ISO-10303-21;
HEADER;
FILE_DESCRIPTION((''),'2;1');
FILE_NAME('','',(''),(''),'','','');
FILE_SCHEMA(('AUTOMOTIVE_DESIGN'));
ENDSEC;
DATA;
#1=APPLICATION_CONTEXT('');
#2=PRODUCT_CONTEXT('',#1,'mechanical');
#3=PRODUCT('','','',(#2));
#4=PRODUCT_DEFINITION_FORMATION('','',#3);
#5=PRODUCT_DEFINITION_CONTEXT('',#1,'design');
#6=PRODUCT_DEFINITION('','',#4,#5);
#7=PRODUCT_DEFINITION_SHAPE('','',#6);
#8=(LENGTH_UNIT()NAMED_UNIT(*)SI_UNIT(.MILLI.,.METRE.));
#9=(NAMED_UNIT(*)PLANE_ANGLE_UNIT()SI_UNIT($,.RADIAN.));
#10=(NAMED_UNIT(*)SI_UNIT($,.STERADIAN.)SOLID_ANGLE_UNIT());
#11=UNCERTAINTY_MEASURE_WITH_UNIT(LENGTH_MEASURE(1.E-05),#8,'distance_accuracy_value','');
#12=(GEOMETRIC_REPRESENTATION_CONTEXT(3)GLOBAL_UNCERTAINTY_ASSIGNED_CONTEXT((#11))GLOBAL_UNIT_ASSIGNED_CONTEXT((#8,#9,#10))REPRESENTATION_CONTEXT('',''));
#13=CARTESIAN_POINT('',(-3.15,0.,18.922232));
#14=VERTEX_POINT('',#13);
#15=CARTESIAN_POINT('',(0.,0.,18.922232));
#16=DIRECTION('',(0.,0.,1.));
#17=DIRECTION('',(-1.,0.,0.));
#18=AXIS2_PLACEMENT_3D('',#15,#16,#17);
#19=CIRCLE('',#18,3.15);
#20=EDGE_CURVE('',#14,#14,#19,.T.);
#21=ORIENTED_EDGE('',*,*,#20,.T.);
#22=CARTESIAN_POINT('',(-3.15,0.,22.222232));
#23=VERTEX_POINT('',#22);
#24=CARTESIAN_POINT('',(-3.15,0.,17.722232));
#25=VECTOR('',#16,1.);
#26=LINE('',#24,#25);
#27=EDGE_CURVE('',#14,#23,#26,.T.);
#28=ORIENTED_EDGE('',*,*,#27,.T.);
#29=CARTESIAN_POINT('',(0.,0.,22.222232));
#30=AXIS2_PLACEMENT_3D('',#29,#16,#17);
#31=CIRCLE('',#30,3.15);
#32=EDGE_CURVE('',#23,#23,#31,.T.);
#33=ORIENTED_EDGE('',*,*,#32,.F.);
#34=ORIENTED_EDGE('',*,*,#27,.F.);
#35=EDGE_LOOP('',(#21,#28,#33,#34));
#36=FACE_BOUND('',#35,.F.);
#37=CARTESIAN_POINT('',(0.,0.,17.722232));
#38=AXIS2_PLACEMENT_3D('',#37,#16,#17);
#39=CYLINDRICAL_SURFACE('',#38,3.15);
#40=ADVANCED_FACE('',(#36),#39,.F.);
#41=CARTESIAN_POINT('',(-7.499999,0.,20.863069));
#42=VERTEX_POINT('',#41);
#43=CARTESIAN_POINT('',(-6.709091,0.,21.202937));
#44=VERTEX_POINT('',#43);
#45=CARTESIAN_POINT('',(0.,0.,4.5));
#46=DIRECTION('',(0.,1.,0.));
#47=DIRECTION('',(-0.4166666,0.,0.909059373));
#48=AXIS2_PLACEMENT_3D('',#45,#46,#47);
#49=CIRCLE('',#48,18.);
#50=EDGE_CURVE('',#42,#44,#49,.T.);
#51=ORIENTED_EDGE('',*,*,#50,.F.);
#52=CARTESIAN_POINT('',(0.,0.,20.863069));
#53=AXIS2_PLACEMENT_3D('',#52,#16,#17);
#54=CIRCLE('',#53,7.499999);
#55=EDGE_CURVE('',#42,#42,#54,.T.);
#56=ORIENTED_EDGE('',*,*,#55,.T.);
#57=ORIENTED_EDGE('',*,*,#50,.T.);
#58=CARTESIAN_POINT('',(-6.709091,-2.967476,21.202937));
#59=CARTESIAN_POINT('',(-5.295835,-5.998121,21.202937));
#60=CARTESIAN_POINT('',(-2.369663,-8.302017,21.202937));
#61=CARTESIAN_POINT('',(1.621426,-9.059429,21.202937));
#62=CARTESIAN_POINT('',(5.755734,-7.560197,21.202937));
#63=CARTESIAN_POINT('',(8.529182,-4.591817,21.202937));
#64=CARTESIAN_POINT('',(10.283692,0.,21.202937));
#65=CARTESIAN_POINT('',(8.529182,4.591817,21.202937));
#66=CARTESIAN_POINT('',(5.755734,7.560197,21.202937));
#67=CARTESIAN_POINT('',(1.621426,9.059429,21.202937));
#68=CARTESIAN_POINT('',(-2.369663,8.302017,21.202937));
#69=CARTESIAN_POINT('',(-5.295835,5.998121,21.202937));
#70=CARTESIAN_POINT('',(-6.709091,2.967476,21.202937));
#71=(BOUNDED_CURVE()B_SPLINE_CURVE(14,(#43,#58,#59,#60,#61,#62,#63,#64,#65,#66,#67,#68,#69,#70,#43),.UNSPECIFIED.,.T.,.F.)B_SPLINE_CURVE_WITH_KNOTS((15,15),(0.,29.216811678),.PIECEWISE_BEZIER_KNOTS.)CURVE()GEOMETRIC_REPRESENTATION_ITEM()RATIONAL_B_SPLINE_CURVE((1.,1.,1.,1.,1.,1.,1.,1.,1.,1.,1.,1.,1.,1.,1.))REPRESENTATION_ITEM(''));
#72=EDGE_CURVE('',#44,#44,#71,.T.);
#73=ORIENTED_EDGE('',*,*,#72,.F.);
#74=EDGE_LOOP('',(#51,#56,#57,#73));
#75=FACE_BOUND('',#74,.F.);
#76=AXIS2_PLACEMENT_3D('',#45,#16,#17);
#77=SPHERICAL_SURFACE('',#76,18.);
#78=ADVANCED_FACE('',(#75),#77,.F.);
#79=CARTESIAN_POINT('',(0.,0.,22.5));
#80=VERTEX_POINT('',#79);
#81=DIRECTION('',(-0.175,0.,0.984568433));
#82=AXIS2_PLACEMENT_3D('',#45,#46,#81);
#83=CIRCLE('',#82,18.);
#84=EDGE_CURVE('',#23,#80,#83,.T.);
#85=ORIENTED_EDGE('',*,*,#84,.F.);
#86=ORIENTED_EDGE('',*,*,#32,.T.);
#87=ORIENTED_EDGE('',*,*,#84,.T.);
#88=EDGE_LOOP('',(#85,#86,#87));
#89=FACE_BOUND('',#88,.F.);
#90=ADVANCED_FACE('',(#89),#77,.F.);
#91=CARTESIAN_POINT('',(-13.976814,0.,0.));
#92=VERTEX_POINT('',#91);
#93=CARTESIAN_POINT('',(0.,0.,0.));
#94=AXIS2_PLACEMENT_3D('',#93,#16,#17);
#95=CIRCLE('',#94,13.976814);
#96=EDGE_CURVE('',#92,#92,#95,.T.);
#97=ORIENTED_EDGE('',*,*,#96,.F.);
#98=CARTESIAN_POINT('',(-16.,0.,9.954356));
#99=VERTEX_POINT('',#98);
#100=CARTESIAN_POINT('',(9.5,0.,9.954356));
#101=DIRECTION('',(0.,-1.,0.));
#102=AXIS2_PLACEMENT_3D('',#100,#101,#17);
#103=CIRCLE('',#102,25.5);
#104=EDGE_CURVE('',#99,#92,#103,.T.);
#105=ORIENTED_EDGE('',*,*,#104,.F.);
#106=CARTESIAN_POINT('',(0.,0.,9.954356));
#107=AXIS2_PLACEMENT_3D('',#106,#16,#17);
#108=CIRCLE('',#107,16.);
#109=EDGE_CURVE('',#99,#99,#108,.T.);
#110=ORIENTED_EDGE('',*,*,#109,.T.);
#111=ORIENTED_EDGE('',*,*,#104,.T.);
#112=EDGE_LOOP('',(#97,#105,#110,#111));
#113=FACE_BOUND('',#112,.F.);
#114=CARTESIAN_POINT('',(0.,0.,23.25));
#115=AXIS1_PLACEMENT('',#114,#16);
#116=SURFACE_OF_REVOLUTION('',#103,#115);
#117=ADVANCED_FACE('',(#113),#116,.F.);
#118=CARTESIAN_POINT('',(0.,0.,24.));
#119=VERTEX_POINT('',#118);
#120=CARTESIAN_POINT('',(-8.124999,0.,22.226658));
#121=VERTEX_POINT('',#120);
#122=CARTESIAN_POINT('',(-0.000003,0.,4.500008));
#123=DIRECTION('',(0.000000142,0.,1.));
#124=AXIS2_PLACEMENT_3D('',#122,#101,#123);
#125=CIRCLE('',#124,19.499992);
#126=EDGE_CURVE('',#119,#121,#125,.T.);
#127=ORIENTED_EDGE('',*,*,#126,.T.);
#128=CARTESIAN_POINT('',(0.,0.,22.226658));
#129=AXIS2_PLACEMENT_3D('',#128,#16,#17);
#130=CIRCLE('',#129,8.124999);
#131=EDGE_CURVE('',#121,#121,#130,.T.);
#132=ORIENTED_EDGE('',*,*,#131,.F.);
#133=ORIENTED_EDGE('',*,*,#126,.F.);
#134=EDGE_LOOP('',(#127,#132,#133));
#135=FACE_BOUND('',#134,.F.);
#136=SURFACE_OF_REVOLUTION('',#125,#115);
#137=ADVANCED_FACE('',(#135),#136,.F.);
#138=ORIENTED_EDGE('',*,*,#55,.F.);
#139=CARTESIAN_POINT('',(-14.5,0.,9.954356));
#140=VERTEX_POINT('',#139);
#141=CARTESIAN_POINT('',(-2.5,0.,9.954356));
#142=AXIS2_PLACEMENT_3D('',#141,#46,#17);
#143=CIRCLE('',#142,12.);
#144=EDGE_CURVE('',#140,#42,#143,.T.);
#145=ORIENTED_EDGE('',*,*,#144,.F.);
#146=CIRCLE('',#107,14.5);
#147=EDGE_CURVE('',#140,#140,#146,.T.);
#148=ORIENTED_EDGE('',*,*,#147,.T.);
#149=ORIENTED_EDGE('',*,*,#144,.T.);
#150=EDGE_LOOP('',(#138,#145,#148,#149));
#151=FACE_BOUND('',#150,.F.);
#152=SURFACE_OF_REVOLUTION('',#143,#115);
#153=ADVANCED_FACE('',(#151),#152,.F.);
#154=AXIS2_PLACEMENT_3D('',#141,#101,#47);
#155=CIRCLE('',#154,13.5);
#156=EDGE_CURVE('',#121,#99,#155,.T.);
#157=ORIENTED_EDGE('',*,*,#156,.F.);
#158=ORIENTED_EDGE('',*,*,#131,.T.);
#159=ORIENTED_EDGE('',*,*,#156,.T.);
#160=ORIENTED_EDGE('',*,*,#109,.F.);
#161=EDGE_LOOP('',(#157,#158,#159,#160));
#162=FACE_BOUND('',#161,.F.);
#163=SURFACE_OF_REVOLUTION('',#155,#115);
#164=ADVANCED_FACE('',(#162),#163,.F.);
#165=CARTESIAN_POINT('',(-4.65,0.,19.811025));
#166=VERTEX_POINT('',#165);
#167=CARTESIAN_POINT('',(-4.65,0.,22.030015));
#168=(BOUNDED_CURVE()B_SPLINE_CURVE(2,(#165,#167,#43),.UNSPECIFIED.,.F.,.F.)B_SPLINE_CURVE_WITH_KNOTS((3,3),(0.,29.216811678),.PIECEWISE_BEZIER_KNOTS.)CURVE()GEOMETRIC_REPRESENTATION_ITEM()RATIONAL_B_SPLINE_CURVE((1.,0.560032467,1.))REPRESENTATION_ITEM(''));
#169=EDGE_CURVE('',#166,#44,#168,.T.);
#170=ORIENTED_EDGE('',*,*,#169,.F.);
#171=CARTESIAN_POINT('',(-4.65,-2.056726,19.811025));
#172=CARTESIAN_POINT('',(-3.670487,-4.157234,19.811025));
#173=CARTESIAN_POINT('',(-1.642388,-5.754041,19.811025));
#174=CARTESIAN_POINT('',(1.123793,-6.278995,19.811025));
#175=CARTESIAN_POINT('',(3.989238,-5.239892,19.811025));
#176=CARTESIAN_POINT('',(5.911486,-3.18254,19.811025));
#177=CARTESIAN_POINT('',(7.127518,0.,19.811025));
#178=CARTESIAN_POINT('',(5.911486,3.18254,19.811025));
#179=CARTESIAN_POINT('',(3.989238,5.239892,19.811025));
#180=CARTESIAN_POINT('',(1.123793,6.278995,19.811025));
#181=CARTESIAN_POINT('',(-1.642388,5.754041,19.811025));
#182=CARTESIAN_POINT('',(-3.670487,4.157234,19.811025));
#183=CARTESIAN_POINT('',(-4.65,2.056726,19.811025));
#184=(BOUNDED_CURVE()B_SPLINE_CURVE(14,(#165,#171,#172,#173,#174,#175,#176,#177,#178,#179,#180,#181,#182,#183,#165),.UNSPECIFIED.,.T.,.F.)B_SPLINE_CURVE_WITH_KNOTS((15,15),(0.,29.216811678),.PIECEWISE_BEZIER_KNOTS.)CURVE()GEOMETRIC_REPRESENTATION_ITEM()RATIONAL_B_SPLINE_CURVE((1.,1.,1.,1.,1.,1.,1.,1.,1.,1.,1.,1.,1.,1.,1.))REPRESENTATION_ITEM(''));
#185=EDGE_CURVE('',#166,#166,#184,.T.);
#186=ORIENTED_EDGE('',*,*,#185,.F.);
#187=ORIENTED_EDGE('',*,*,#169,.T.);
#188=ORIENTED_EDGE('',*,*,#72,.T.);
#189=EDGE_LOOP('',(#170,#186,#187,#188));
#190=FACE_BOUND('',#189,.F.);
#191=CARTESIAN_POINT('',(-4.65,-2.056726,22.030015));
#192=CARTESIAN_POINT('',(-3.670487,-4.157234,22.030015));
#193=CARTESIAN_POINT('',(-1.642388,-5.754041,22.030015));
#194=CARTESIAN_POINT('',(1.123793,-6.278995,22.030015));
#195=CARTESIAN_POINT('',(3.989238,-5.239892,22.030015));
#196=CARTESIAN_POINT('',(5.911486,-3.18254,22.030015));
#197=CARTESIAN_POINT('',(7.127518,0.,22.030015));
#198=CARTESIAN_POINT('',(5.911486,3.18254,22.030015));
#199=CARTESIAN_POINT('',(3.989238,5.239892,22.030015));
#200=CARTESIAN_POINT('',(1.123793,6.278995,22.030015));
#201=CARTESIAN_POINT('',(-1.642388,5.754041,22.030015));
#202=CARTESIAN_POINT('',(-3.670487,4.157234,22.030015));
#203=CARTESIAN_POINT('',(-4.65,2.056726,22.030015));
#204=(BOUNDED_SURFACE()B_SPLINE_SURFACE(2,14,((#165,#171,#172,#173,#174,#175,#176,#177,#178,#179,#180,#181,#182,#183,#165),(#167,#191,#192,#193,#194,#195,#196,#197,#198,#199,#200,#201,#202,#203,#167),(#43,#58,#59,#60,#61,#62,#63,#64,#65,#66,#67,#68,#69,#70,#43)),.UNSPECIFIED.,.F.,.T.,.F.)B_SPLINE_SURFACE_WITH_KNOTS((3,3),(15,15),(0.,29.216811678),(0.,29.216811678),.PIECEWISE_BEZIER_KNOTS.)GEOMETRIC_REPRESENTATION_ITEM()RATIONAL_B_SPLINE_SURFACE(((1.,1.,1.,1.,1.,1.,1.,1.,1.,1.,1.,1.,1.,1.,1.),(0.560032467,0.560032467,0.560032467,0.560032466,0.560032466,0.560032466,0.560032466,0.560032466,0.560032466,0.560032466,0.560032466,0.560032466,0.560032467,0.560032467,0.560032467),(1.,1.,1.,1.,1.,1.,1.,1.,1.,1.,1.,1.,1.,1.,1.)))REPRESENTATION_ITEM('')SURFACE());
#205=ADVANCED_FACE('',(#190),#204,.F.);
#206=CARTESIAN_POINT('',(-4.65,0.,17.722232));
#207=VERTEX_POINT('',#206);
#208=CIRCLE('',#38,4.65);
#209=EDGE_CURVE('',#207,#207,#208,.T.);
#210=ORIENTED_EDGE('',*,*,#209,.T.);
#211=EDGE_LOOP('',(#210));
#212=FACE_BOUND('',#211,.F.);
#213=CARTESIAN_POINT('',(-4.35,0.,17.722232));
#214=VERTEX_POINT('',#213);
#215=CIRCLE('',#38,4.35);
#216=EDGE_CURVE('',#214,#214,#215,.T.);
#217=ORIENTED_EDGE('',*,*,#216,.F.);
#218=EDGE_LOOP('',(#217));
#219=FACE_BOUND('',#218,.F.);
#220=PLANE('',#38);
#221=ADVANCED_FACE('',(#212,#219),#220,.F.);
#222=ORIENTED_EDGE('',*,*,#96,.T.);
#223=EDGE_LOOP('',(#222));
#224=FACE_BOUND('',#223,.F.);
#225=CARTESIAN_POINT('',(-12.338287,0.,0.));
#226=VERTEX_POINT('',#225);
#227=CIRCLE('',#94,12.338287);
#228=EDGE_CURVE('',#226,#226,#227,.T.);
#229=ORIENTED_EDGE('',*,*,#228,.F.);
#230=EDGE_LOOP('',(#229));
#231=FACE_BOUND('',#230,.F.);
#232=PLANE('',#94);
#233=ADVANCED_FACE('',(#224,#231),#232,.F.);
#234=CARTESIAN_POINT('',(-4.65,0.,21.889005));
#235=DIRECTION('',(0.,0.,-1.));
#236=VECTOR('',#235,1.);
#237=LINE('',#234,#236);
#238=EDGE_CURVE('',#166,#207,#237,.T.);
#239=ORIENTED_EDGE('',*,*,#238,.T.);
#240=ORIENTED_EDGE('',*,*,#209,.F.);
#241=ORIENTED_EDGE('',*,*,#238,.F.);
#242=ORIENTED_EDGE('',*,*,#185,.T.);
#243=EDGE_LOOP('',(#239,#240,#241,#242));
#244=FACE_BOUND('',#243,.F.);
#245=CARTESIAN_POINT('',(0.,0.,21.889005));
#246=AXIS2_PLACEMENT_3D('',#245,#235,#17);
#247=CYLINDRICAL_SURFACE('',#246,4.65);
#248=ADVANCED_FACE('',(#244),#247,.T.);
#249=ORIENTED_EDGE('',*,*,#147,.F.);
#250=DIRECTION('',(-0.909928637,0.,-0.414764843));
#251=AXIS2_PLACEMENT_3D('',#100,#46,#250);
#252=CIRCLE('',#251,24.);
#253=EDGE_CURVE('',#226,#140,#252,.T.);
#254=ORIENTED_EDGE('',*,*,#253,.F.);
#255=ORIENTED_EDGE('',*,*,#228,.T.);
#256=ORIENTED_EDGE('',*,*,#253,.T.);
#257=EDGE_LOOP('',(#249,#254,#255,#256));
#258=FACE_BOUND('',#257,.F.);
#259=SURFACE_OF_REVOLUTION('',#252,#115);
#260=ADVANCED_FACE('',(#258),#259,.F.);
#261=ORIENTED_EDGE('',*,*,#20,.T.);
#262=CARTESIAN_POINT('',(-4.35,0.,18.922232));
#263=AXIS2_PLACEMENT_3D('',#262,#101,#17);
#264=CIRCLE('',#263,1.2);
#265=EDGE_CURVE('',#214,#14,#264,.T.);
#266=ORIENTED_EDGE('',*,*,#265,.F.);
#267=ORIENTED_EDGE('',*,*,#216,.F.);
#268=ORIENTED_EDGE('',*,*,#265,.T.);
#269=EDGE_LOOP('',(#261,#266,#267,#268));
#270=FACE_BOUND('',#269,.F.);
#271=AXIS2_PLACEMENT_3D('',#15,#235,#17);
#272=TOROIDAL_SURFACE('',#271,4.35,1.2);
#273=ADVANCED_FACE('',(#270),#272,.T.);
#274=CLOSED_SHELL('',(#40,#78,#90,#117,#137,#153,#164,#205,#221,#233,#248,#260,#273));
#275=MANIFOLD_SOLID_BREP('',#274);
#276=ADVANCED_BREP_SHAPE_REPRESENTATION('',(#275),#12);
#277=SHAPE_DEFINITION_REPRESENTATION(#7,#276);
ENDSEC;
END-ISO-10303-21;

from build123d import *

# Parameters (mm, degrees)
F2_R = 1.2
F3_R = 1.5


# Not quite as in the source:
# - ends of sketch curves that miss each other by under 0.0002 mm in the source are joined


with BuildPart() as f1:
    # F0 (on Front) → F1 (revolve)
    with BuildSketch(Plane.XZ):
        with BuildLine():
            ThreePointArc((-3.15, 22.2222318008), (-3.903557352, 22.0716316829), (-4.65, 21.8890051469))
            Line((-4.65, 21.8890051469), (-4.65, 17.7222318008))
            Line((-4.65, 17.7222318008), (-3.15, 17.7222318008))
            Line((-3.15, 17.7222318008), (-3.15, 22.2222318008))
        make_face()
        with BuildLine():
            ThreePointArc((-7.4999988015, 20.8630687213), (-6.0966182517, 21.4360929938), (-4.65, 21.8890051469))
            ThreePointArc((-4.65, 21.8890051469), (-3.903557352, 22.0716316829), (-3.15, 22.2222318008))
            ThreePointArc((-3.15, 22.2222318008), (-1.5811115688, 22.430423481), (0, 22.5))
            Line((0, 22.5), (0, 24))
            ThreePointArc((0, 24), (-4.1581350796, 23.5515072433), (-8.1249988681, 22.2266581445))
            ThreePointArc((-8.1249988681, 22.2266581445), (-13.8619427254, 17.245190158), (-16, 9.9543562404))
            ThreePointArc((-16, 9.9543562404), (-15.4890851758, 4.8754171303), (-13.9768139545, 0))
            Line((-13.9768139545, 0), (-12.3382868923, 0))
            ThreePointArc((-12.3382868923, 0), (-13.9533457904, 4.8611693699), (-14.4999996005, 9.9543562404))
            ThreePointArc((-14.4999996005, 9.9543562404), (-12.5995043015, 16.4350973087), (-7.4999988015, 20.8630687213))
        make_face()
    revolve(axis=Axis((0, 0, 23.25), (0, 0, 1)))

    # F2
    f2_edges = [f1.edges().sort_by_distance(p)[0] for p in [
        (3.15, 0, 17.722232),
    ]]
    fillet(f2_edges, radius=F2_R)

    # F3
    f3_edges = [f1.edges().sort_by_distance(p)[0] for p in [
        (4.65, 0, 21.889005),
    ]]
    fillet(f3_edges, radius=F3_R)


solid = f1.part
